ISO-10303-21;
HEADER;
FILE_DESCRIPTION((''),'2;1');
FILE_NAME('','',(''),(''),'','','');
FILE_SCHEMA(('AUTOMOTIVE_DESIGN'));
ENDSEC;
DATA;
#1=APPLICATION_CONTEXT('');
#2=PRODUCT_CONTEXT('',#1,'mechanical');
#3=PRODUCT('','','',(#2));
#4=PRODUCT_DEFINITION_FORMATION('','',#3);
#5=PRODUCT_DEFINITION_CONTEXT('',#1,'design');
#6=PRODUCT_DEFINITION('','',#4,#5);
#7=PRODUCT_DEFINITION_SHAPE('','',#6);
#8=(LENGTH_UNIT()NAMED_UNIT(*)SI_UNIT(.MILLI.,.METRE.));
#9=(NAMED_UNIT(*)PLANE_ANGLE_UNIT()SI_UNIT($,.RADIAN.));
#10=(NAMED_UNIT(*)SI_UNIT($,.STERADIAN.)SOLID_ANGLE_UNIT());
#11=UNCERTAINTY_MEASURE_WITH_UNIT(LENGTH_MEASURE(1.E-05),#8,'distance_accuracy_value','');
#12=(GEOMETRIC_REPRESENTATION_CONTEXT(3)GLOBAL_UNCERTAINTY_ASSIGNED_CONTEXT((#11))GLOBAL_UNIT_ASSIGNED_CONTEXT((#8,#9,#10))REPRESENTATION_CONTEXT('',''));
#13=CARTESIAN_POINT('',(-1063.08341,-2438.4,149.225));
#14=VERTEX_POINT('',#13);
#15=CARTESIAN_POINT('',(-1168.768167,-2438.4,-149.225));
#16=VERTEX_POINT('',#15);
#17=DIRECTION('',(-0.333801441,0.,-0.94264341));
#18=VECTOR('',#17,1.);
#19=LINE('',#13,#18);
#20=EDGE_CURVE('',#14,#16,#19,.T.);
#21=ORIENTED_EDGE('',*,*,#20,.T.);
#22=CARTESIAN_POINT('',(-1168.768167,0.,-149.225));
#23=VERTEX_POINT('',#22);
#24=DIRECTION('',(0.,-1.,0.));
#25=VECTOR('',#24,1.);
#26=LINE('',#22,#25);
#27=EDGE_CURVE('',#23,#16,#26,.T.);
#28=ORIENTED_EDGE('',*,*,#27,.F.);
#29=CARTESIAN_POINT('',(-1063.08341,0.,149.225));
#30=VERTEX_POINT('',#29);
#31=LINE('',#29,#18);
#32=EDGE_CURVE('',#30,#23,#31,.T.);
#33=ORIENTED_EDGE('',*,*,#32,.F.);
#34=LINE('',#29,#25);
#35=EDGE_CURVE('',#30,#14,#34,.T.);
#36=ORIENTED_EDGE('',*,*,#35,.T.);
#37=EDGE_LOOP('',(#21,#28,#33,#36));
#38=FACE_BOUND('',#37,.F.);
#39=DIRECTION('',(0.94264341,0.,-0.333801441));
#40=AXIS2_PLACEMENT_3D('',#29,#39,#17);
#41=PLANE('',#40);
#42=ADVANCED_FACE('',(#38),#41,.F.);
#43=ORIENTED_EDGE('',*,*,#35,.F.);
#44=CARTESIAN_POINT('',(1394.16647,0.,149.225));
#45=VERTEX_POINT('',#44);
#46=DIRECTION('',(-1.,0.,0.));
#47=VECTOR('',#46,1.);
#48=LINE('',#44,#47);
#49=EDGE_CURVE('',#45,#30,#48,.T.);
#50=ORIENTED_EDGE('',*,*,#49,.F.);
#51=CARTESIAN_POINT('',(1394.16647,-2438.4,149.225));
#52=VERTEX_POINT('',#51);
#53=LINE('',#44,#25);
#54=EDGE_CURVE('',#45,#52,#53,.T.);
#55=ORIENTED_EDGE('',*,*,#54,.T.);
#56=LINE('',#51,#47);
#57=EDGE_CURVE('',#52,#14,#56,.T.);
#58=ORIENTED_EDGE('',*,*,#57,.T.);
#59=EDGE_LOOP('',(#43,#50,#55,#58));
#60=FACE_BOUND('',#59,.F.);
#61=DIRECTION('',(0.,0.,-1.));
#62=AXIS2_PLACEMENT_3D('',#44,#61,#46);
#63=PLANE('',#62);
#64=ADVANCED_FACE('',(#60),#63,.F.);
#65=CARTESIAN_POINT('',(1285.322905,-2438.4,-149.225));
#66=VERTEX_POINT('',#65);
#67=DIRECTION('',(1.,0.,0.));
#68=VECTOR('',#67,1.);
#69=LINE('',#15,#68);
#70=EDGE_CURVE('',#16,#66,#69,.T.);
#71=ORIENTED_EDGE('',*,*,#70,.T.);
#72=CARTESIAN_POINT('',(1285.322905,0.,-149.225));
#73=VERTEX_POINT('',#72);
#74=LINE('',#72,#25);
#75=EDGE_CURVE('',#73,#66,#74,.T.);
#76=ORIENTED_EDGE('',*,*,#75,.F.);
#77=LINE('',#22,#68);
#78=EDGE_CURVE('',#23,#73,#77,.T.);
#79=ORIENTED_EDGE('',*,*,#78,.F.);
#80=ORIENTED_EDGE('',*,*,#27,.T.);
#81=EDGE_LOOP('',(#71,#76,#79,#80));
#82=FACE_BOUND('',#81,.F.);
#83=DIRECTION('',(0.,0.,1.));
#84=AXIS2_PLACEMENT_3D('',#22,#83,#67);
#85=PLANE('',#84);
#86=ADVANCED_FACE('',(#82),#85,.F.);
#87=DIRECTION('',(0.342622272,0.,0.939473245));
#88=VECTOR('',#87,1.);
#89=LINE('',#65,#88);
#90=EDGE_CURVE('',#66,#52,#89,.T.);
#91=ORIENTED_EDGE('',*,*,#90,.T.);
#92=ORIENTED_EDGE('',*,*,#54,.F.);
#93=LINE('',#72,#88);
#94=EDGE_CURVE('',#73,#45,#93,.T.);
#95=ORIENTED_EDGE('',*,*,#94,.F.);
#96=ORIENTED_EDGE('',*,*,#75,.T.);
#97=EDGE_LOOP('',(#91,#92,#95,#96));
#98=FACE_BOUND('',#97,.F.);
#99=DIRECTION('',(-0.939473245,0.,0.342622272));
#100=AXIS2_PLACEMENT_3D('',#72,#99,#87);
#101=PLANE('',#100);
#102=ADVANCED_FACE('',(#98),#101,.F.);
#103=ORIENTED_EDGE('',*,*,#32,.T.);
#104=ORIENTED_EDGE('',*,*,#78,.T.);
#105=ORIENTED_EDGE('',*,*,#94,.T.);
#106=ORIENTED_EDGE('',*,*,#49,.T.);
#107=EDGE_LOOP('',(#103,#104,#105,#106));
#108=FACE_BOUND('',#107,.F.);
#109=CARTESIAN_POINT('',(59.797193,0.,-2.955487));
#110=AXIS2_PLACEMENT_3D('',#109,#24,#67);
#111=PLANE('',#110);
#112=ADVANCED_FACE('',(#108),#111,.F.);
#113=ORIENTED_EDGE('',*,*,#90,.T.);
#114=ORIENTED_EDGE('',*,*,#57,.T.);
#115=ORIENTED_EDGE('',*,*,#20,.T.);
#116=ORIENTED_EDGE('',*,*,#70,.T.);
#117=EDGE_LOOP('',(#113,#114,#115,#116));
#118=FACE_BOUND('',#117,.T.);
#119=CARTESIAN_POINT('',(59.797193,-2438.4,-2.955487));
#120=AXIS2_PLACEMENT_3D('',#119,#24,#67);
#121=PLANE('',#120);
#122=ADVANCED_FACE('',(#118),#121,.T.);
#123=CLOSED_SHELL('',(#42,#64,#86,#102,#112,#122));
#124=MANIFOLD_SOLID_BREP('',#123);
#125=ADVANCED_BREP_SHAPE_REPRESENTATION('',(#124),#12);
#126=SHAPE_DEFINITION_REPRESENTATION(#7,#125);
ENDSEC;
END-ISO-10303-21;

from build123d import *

# Parameters (mm, degrees)
F1_DEPTH = 2438.4


# Not quite as in the source:
# - a feature names something its author has since deleted; it is built from what else it names


with BuildPart() as f1:
    # F0 (on Front) → F1 (new body)
    with BuildSketch(Plane.XZ):
        Polygon((1244.6, 149.225), (-1063.0834102631, 149.225), (-1168.7681674957, -149.225), (1244.6, -149.225), align=None)
        Polygon((1394.166469574, 149.225), (1244.6, 149.225), (1359.1151759869, 53.1140487253), align=None)
        Polygon((1359.1151759869, 53.1140487253), (1244.6, 149.225), (1244.6, -149.225), (1285.3229045868, -149.225), align=None)
    extrude(amount=F1_DEPTH)


solid = f1.part
